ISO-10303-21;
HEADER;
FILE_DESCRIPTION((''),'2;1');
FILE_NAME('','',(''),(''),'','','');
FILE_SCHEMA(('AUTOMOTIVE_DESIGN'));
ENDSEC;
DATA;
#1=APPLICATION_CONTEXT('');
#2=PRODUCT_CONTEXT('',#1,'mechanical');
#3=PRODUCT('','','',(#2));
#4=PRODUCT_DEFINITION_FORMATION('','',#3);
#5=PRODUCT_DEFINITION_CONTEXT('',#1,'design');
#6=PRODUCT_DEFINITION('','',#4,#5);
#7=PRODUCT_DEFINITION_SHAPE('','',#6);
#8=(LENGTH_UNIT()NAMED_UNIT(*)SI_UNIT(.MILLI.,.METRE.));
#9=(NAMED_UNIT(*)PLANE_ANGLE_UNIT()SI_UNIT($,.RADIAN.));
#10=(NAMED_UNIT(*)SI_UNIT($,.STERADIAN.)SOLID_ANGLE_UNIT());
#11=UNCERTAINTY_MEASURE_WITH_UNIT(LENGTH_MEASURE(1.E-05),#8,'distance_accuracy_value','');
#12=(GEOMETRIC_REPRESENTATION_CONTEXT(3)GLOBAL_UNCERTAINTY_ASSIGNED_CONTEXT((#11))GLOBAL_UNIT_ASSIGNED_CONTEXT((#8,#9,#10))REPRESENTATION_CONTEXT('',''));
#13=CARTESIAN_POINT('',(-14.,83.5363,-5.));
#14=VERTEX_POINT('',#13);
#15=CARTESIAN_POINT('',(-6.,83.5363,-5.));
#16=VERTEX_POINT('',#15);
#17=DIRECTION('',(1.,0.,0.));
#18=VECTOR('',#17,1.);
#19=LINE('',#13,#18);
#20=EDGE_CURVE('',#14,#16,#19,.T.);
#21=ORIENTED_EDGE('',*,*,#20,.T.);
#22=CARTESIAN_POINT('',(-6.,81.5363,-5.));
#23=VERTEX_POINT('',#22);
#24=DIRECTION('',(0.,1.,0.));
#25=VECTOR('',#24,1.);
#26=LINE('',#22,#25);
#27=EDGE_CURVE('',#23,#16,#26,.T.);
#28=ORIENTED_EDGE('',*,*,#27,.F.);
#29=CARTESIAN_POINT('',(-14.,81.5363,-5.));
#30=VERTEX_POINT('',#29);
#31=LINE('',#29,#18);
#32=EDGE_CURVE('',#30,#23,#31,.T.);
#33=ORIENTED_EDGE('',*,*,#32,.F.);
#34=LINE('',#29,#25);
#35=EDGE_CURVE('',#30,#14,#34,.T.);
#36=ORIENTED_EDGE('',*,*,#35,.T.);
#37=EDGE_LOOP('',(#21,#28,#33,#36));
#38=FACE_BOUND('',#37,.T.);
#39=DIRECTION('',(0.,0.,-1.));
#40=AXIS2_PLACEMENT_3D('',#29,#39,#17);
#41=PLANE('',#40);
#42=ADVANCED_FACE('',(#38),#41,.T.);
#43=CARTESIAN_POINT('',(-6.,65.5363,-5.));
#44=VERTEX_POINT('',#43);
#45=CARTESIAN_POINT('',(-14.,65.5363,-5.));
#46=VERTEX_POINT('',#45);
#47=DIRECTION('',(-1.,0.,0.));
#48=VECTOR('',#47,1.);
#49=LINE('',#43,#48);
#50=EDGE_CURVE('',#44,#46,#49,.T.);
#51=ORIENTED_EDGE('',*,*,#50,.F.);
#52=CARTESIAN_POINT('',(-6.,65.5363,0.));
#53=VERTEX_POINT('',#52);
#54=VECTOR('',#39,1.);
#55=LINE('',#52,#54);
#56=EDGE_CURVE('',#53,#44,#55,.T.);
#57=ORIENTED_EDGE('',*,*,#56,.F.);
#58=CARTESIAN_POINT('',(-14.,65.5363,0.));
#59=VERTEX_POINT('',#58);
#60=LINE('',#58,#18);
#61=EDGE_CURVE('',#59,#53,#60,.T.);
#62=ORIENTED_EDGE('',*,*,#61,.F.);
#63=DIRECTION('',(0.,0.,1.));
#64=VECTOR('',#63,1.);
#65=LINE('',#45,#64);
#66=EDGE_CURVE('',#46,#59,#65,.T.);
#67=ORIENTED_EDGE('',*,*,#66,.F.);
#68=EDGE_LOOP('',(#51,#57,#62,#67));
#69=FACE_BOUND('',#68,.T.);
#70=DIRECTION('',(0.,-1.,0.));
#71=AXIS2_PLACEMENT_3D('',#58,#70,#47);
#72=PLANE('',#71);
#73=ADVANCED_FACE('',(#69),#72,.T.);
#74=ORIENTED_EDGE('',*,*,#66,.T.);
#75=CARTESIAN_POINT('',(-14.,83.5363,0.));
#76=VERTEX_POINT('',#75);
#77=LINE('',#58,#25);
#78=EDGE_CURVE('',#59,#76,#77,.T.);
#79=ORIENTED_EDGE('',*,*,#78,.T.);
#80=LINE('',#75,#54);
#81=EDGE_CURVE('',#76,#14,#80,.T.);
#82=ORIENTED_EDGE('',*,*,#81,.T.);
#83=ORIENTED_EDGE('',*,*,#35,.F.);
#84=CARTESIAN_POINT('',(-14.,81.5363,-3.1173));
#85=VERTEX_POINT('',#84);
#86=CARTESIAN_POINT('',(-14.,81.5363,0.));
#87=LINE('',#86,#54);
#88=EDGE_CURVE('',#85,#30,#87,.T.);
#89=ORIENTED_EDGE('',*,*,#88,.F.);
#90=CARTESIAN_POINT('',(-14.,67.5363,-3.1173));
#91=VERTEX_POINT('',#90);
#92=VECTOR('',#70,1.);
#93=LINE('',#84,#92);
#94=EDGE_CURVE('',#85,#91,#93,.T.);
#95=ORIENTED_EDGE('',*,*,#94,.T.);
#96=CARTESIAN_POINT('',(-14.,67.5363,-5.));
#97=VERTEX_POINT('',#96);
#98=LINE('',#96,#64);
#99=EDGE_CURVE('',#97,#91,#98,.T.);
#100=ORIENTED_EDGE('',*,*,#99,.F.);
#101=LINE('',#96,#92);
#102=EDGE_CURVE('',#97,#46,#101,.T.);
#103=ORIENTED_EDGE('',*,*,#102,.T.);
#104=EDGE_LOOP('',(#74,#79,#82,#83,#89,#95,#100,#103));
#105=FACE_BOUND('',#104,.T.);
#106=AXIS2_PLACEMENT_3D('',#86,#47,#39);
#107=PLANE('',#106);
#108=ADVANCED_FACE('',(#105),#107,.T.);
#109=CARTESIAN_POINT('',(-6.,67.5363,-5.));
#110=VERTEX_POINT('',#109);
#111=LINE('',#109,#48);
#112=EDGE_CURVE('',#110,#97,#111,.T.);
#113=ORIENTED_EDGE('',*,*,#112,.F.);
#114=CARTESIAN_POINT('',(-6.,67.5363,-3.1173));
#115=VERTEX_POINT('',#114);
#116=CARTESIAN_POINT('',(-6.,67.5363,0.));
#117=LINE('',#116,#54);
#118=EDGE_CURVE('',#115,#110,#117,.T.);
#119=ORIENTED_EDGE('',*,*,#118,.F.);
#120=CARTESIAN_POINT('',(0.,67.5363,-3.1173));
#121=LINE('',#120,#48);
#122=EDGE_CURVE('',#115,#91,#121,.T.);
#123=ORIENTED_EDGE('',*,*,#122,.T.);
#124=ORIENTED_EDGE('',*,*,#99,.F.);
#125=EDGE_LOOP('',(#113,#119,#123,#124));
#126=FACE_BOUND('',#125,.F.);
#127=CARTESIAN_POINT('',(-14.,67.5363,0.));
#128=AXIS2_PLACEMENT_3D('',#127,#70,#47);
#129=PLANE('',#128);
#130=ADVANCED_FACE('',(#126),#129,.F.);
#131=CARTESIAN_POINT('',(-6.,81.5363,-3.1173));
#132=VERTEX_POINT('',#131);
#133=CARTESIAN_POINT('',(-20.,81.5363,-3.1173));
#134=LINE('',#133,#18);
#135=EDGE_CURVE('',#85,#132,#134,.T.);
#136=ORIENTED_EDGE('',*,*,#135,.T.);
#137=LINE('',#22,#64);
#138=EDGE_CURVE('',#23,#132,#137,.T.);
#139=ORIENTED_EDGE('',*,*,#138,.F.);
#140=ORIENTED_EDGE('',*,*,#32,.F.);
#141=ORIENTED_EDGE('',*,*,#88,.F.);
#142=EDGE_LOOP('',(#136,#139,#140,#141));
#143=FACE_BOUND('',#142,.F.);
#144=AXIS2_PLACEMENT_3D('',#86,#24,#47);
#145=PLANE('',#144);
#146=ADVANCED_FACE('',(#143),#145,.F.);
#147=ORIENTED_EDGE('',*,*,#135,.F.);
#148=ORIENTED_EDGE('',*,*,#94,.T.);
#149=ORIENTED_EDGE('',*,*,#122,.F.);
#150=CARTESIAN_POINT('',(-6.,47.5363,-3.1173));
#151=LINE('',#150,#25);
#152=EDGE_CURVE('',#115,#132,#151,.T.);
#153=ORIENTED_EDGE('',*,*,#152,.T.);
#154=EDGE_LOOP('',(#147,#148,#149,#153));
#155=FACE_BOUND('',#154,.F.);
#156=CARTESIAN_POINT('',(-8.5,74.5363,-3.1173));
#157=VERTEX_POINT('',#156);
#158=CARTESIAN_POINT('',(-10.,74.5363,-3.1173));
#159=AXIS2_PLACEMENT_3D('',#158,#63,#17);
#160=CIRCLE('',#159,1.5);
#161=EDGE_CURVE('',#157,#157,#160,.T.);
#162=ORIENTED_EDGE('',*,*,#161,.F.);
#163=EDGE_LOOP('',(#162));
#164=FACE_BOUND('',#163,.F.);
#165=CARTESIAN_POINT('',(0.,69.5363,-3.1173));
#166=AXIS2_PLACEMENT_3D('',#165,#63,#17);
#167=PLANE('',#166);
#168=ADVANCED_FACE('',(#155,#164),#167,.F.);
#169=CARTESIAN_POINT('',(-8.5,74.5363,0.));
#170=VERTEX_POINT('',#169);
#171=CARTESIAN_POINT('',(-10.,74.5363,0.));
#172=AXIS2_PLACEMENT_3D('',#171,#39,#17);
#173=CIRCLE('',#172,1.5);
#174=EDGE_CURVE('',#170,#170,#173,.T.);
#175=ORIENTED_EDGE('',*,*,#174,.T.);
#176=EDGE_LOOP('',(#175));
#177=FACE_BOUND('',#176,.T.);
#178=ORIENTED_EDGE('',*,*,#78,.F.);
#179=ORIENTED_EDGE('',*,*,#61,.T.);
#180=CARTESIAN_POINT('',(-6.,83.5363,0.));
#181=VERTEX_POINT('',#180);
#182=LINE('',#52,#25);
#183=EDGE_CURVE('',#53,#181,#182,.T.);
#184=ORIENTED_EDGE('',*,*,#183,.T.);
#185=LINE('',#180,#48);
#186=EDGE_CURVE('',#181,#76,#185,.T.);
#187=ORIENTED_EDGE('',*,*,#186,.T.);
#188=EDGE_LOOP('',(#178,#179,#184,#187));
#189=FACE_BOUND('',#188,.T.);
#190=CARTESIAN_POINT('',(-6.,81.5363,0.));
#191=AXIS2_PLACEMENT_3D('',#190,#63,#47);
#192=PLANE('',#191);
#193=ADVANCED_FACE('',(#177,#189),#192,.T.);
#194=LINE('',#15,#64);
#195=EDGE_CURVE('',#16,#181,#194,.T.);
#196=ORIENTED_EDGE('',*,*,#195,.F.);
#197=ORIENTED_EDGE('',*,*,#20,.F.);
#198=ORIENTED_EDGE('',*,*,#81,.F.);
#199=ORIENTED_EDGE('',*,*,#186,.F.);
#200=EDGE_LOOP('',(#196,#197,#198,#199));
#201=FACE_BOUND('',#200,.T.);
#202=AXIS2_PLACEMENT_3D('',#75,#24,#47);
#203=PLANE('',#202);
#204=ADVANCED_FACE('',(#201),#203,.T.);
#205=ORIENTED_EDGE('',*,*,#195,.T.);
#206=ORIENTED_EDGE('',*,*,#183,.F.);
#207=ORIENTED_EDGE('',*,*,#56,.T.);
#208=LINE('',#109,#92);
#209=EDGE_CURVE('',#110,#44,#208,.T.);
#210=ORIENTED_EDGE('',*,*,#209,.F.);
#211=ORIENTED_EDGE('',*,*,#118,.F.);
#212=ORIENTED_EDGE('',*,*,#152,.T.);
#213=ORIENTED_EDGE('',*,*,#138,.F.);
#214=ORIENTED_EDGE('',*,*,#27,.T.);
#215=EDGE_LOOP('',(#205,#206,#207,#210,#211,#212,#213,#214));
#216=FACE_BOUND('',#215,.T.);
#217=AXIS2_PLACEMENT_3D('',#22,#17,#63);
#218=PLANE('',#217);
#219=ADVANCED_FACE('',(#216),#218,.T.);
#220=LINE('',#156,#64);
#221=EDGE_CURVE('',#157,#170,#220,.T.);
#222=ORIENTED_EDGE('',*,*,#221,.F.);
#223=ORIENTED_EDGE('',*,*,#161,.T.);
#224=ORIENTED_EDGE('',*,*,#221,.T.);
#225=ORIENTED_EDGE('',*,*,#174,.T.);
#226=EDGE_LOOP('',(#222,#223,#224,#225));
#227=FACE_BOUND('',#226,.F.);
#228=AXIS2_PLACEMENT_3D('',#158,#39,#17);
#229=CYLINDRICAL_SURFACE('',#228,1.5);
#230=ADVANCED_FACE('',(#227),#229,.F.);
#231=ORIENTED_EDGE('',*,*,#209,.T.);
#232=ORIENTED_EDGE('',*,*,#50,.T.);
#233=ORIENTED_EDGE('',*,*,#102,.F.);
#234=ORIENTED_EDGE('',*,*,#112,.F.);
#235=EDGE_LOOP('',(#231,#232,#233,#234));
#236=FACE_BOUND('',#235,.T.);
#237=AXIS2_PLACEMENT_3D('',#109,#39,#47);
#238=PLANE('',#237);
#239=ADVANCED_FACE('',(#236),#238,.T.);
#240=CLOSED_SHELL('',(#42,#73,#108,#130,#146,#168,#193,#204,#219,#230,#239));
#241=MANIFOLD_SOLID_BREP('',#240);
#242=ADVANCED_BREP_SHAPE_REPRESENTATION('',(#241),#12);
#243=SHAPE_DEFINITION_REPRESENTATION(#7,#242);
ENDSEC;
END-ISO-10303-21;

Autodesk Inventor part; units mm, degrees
ref_plane "YZ Plane" through (0, 0, 0) normal (1, 0, 0) x (0, 1, 0)
ref_plane "XZ Plane" through (0, 0, 0) normal (0, 1, 0) x (-1, 0, 0)
ref_plane "XY Plane" through (0, 0, 0) normal (0, 0, 1) x (1, 0, 0)
ref_plane "Work Plane1" through (0, 69.5363, 0) normal (0, 0, 1) x (1, 0, 0)
sketch "Sketch1" plane through (0, 69.5363, 0) normal (0, 0, 1) x (1, 0, 0)
  line L0 (9.2773, 16.5681) -> (-0.7227, 16.5681) projected
  line L1 (0, -69.5363) -> (0, -2) projected
  line L2 (-20, 0) -> (-20, -2) projected
  line L3 (0, -2) -> (-20, -2)
  line L4 (-20, -2) -> (-20, 12)
  line L5 (-20, 12) -> (0, 12)
  line L6 (0, 12) -> (0, -2)
  dimension "d17" = 14
  dimension "d18" = 20
extrude "Extrusion1" add sketch "Sketch1" along normal blind -3.1173
sketch "Sketch2" plane through (0, 69.5363, -3.1173) normal (0, 0, -1) x (1, 0, 0)
  line L0 (0, 2) -> (-20, -12)
  line L1 (-20, 2) -> (0, -12)
  circle A0 centre (-10, -5) radius 1.5
  point P0 (0, 69.5363)
  point P1 (-10, 4)
  dimension "d22" = 3
extrude "Extrusion2" cut sketch "Sketch2" against normal up to surface (3.1173 mm away)
sketch "Sketch3" plane through (0, 69.5363, -3.1173) normal (0, 0, -1) x (1, 0, 0)
  line L0 (0, -12) -> (0, 2) projected
  line L1 (-20, 2) -> (-20, -12) projected
  line L2 (-20, 2) -> (0, -12) construction
  line L3 (-20, -12) -> (0, 2) construction
  line L4 (-20, -12) -> (-20, -14.5)
  line L5 (-20, -14.5) -> (-17.5, -14.5)
  line L6 (0, 2) -> (0, 4.5)
  line L7 (0, 4.5) -> (-2.5, 4.5)
  line L8 (-20, -12) -> (0, -12) projected
  line L9 (-14, 22) -> (-6, 22)
  line L10 (-6, 22) -> (-6, -12)
  line L11 (-6, -12) -> (-14, -12)
  line L12 (-14, -12) -> (-14, 22)
  line L13 (-14, 22) -> (-6, -12) construction
  line L14 (-6, 22) -> (-14, -12) construction
  line L15 (-20, 2) -> (0, 2)
  line L16 (0, 2) -> (0, -12)
  line L17 (0, -12) -> (-20, -12)
  line L18 (-20, -12) -> (-20, 2)
  point P0 (0, 69.5363)
  point P1 (-10, 5)
  dimension "d7" = 2.5
  dimension "d8" = 2.5
  dimension "d9" = 2.5
  dimension "d10" = 2.5
  dimension "d28" = 8
extrude "Extrusion4" cut sketch "Sketch3" against normal up to surface (3.1173 mm away) contours L8 L10 L15 L0 | L8 L1 L15 L12
sketch "Sketch4" plane through (-14, 67.5363, 0) normal (0, -1, 0) x (-1, 0, 0)
  line L0 (0, 0) -> (-8, 0)
  line L1 (-8, 0) -> (-8, 5)
  line L2 (-8, 5) -> (0, 5)
  line L3 (0, 5) -> (0, 0)
  point P0 (-14, 0)
  dimension "d34" = 5
extrude "Extrusion5" add sketch "Sketch4" along normal blind 2
sketch "Sketch5" plane through (-14, 81.5363, 0) normal (0, 1, 0) x (-1, 0, 0)
  line L0 (0, 0) -> (0, -5) projected
  line L1 (-8, 0) -> (0, 0)
  line L2 (0, 0) -> (0, -5)
  line L3 (0, -5) -> (-8, -5)
  line L4 (-8, -5) -> (-8, 0)
  dimension "d35" = 5
extrude "Extrusion6" add sketch "Sketch5" along normal blind 2
properties part number "pulley_housing_top"
